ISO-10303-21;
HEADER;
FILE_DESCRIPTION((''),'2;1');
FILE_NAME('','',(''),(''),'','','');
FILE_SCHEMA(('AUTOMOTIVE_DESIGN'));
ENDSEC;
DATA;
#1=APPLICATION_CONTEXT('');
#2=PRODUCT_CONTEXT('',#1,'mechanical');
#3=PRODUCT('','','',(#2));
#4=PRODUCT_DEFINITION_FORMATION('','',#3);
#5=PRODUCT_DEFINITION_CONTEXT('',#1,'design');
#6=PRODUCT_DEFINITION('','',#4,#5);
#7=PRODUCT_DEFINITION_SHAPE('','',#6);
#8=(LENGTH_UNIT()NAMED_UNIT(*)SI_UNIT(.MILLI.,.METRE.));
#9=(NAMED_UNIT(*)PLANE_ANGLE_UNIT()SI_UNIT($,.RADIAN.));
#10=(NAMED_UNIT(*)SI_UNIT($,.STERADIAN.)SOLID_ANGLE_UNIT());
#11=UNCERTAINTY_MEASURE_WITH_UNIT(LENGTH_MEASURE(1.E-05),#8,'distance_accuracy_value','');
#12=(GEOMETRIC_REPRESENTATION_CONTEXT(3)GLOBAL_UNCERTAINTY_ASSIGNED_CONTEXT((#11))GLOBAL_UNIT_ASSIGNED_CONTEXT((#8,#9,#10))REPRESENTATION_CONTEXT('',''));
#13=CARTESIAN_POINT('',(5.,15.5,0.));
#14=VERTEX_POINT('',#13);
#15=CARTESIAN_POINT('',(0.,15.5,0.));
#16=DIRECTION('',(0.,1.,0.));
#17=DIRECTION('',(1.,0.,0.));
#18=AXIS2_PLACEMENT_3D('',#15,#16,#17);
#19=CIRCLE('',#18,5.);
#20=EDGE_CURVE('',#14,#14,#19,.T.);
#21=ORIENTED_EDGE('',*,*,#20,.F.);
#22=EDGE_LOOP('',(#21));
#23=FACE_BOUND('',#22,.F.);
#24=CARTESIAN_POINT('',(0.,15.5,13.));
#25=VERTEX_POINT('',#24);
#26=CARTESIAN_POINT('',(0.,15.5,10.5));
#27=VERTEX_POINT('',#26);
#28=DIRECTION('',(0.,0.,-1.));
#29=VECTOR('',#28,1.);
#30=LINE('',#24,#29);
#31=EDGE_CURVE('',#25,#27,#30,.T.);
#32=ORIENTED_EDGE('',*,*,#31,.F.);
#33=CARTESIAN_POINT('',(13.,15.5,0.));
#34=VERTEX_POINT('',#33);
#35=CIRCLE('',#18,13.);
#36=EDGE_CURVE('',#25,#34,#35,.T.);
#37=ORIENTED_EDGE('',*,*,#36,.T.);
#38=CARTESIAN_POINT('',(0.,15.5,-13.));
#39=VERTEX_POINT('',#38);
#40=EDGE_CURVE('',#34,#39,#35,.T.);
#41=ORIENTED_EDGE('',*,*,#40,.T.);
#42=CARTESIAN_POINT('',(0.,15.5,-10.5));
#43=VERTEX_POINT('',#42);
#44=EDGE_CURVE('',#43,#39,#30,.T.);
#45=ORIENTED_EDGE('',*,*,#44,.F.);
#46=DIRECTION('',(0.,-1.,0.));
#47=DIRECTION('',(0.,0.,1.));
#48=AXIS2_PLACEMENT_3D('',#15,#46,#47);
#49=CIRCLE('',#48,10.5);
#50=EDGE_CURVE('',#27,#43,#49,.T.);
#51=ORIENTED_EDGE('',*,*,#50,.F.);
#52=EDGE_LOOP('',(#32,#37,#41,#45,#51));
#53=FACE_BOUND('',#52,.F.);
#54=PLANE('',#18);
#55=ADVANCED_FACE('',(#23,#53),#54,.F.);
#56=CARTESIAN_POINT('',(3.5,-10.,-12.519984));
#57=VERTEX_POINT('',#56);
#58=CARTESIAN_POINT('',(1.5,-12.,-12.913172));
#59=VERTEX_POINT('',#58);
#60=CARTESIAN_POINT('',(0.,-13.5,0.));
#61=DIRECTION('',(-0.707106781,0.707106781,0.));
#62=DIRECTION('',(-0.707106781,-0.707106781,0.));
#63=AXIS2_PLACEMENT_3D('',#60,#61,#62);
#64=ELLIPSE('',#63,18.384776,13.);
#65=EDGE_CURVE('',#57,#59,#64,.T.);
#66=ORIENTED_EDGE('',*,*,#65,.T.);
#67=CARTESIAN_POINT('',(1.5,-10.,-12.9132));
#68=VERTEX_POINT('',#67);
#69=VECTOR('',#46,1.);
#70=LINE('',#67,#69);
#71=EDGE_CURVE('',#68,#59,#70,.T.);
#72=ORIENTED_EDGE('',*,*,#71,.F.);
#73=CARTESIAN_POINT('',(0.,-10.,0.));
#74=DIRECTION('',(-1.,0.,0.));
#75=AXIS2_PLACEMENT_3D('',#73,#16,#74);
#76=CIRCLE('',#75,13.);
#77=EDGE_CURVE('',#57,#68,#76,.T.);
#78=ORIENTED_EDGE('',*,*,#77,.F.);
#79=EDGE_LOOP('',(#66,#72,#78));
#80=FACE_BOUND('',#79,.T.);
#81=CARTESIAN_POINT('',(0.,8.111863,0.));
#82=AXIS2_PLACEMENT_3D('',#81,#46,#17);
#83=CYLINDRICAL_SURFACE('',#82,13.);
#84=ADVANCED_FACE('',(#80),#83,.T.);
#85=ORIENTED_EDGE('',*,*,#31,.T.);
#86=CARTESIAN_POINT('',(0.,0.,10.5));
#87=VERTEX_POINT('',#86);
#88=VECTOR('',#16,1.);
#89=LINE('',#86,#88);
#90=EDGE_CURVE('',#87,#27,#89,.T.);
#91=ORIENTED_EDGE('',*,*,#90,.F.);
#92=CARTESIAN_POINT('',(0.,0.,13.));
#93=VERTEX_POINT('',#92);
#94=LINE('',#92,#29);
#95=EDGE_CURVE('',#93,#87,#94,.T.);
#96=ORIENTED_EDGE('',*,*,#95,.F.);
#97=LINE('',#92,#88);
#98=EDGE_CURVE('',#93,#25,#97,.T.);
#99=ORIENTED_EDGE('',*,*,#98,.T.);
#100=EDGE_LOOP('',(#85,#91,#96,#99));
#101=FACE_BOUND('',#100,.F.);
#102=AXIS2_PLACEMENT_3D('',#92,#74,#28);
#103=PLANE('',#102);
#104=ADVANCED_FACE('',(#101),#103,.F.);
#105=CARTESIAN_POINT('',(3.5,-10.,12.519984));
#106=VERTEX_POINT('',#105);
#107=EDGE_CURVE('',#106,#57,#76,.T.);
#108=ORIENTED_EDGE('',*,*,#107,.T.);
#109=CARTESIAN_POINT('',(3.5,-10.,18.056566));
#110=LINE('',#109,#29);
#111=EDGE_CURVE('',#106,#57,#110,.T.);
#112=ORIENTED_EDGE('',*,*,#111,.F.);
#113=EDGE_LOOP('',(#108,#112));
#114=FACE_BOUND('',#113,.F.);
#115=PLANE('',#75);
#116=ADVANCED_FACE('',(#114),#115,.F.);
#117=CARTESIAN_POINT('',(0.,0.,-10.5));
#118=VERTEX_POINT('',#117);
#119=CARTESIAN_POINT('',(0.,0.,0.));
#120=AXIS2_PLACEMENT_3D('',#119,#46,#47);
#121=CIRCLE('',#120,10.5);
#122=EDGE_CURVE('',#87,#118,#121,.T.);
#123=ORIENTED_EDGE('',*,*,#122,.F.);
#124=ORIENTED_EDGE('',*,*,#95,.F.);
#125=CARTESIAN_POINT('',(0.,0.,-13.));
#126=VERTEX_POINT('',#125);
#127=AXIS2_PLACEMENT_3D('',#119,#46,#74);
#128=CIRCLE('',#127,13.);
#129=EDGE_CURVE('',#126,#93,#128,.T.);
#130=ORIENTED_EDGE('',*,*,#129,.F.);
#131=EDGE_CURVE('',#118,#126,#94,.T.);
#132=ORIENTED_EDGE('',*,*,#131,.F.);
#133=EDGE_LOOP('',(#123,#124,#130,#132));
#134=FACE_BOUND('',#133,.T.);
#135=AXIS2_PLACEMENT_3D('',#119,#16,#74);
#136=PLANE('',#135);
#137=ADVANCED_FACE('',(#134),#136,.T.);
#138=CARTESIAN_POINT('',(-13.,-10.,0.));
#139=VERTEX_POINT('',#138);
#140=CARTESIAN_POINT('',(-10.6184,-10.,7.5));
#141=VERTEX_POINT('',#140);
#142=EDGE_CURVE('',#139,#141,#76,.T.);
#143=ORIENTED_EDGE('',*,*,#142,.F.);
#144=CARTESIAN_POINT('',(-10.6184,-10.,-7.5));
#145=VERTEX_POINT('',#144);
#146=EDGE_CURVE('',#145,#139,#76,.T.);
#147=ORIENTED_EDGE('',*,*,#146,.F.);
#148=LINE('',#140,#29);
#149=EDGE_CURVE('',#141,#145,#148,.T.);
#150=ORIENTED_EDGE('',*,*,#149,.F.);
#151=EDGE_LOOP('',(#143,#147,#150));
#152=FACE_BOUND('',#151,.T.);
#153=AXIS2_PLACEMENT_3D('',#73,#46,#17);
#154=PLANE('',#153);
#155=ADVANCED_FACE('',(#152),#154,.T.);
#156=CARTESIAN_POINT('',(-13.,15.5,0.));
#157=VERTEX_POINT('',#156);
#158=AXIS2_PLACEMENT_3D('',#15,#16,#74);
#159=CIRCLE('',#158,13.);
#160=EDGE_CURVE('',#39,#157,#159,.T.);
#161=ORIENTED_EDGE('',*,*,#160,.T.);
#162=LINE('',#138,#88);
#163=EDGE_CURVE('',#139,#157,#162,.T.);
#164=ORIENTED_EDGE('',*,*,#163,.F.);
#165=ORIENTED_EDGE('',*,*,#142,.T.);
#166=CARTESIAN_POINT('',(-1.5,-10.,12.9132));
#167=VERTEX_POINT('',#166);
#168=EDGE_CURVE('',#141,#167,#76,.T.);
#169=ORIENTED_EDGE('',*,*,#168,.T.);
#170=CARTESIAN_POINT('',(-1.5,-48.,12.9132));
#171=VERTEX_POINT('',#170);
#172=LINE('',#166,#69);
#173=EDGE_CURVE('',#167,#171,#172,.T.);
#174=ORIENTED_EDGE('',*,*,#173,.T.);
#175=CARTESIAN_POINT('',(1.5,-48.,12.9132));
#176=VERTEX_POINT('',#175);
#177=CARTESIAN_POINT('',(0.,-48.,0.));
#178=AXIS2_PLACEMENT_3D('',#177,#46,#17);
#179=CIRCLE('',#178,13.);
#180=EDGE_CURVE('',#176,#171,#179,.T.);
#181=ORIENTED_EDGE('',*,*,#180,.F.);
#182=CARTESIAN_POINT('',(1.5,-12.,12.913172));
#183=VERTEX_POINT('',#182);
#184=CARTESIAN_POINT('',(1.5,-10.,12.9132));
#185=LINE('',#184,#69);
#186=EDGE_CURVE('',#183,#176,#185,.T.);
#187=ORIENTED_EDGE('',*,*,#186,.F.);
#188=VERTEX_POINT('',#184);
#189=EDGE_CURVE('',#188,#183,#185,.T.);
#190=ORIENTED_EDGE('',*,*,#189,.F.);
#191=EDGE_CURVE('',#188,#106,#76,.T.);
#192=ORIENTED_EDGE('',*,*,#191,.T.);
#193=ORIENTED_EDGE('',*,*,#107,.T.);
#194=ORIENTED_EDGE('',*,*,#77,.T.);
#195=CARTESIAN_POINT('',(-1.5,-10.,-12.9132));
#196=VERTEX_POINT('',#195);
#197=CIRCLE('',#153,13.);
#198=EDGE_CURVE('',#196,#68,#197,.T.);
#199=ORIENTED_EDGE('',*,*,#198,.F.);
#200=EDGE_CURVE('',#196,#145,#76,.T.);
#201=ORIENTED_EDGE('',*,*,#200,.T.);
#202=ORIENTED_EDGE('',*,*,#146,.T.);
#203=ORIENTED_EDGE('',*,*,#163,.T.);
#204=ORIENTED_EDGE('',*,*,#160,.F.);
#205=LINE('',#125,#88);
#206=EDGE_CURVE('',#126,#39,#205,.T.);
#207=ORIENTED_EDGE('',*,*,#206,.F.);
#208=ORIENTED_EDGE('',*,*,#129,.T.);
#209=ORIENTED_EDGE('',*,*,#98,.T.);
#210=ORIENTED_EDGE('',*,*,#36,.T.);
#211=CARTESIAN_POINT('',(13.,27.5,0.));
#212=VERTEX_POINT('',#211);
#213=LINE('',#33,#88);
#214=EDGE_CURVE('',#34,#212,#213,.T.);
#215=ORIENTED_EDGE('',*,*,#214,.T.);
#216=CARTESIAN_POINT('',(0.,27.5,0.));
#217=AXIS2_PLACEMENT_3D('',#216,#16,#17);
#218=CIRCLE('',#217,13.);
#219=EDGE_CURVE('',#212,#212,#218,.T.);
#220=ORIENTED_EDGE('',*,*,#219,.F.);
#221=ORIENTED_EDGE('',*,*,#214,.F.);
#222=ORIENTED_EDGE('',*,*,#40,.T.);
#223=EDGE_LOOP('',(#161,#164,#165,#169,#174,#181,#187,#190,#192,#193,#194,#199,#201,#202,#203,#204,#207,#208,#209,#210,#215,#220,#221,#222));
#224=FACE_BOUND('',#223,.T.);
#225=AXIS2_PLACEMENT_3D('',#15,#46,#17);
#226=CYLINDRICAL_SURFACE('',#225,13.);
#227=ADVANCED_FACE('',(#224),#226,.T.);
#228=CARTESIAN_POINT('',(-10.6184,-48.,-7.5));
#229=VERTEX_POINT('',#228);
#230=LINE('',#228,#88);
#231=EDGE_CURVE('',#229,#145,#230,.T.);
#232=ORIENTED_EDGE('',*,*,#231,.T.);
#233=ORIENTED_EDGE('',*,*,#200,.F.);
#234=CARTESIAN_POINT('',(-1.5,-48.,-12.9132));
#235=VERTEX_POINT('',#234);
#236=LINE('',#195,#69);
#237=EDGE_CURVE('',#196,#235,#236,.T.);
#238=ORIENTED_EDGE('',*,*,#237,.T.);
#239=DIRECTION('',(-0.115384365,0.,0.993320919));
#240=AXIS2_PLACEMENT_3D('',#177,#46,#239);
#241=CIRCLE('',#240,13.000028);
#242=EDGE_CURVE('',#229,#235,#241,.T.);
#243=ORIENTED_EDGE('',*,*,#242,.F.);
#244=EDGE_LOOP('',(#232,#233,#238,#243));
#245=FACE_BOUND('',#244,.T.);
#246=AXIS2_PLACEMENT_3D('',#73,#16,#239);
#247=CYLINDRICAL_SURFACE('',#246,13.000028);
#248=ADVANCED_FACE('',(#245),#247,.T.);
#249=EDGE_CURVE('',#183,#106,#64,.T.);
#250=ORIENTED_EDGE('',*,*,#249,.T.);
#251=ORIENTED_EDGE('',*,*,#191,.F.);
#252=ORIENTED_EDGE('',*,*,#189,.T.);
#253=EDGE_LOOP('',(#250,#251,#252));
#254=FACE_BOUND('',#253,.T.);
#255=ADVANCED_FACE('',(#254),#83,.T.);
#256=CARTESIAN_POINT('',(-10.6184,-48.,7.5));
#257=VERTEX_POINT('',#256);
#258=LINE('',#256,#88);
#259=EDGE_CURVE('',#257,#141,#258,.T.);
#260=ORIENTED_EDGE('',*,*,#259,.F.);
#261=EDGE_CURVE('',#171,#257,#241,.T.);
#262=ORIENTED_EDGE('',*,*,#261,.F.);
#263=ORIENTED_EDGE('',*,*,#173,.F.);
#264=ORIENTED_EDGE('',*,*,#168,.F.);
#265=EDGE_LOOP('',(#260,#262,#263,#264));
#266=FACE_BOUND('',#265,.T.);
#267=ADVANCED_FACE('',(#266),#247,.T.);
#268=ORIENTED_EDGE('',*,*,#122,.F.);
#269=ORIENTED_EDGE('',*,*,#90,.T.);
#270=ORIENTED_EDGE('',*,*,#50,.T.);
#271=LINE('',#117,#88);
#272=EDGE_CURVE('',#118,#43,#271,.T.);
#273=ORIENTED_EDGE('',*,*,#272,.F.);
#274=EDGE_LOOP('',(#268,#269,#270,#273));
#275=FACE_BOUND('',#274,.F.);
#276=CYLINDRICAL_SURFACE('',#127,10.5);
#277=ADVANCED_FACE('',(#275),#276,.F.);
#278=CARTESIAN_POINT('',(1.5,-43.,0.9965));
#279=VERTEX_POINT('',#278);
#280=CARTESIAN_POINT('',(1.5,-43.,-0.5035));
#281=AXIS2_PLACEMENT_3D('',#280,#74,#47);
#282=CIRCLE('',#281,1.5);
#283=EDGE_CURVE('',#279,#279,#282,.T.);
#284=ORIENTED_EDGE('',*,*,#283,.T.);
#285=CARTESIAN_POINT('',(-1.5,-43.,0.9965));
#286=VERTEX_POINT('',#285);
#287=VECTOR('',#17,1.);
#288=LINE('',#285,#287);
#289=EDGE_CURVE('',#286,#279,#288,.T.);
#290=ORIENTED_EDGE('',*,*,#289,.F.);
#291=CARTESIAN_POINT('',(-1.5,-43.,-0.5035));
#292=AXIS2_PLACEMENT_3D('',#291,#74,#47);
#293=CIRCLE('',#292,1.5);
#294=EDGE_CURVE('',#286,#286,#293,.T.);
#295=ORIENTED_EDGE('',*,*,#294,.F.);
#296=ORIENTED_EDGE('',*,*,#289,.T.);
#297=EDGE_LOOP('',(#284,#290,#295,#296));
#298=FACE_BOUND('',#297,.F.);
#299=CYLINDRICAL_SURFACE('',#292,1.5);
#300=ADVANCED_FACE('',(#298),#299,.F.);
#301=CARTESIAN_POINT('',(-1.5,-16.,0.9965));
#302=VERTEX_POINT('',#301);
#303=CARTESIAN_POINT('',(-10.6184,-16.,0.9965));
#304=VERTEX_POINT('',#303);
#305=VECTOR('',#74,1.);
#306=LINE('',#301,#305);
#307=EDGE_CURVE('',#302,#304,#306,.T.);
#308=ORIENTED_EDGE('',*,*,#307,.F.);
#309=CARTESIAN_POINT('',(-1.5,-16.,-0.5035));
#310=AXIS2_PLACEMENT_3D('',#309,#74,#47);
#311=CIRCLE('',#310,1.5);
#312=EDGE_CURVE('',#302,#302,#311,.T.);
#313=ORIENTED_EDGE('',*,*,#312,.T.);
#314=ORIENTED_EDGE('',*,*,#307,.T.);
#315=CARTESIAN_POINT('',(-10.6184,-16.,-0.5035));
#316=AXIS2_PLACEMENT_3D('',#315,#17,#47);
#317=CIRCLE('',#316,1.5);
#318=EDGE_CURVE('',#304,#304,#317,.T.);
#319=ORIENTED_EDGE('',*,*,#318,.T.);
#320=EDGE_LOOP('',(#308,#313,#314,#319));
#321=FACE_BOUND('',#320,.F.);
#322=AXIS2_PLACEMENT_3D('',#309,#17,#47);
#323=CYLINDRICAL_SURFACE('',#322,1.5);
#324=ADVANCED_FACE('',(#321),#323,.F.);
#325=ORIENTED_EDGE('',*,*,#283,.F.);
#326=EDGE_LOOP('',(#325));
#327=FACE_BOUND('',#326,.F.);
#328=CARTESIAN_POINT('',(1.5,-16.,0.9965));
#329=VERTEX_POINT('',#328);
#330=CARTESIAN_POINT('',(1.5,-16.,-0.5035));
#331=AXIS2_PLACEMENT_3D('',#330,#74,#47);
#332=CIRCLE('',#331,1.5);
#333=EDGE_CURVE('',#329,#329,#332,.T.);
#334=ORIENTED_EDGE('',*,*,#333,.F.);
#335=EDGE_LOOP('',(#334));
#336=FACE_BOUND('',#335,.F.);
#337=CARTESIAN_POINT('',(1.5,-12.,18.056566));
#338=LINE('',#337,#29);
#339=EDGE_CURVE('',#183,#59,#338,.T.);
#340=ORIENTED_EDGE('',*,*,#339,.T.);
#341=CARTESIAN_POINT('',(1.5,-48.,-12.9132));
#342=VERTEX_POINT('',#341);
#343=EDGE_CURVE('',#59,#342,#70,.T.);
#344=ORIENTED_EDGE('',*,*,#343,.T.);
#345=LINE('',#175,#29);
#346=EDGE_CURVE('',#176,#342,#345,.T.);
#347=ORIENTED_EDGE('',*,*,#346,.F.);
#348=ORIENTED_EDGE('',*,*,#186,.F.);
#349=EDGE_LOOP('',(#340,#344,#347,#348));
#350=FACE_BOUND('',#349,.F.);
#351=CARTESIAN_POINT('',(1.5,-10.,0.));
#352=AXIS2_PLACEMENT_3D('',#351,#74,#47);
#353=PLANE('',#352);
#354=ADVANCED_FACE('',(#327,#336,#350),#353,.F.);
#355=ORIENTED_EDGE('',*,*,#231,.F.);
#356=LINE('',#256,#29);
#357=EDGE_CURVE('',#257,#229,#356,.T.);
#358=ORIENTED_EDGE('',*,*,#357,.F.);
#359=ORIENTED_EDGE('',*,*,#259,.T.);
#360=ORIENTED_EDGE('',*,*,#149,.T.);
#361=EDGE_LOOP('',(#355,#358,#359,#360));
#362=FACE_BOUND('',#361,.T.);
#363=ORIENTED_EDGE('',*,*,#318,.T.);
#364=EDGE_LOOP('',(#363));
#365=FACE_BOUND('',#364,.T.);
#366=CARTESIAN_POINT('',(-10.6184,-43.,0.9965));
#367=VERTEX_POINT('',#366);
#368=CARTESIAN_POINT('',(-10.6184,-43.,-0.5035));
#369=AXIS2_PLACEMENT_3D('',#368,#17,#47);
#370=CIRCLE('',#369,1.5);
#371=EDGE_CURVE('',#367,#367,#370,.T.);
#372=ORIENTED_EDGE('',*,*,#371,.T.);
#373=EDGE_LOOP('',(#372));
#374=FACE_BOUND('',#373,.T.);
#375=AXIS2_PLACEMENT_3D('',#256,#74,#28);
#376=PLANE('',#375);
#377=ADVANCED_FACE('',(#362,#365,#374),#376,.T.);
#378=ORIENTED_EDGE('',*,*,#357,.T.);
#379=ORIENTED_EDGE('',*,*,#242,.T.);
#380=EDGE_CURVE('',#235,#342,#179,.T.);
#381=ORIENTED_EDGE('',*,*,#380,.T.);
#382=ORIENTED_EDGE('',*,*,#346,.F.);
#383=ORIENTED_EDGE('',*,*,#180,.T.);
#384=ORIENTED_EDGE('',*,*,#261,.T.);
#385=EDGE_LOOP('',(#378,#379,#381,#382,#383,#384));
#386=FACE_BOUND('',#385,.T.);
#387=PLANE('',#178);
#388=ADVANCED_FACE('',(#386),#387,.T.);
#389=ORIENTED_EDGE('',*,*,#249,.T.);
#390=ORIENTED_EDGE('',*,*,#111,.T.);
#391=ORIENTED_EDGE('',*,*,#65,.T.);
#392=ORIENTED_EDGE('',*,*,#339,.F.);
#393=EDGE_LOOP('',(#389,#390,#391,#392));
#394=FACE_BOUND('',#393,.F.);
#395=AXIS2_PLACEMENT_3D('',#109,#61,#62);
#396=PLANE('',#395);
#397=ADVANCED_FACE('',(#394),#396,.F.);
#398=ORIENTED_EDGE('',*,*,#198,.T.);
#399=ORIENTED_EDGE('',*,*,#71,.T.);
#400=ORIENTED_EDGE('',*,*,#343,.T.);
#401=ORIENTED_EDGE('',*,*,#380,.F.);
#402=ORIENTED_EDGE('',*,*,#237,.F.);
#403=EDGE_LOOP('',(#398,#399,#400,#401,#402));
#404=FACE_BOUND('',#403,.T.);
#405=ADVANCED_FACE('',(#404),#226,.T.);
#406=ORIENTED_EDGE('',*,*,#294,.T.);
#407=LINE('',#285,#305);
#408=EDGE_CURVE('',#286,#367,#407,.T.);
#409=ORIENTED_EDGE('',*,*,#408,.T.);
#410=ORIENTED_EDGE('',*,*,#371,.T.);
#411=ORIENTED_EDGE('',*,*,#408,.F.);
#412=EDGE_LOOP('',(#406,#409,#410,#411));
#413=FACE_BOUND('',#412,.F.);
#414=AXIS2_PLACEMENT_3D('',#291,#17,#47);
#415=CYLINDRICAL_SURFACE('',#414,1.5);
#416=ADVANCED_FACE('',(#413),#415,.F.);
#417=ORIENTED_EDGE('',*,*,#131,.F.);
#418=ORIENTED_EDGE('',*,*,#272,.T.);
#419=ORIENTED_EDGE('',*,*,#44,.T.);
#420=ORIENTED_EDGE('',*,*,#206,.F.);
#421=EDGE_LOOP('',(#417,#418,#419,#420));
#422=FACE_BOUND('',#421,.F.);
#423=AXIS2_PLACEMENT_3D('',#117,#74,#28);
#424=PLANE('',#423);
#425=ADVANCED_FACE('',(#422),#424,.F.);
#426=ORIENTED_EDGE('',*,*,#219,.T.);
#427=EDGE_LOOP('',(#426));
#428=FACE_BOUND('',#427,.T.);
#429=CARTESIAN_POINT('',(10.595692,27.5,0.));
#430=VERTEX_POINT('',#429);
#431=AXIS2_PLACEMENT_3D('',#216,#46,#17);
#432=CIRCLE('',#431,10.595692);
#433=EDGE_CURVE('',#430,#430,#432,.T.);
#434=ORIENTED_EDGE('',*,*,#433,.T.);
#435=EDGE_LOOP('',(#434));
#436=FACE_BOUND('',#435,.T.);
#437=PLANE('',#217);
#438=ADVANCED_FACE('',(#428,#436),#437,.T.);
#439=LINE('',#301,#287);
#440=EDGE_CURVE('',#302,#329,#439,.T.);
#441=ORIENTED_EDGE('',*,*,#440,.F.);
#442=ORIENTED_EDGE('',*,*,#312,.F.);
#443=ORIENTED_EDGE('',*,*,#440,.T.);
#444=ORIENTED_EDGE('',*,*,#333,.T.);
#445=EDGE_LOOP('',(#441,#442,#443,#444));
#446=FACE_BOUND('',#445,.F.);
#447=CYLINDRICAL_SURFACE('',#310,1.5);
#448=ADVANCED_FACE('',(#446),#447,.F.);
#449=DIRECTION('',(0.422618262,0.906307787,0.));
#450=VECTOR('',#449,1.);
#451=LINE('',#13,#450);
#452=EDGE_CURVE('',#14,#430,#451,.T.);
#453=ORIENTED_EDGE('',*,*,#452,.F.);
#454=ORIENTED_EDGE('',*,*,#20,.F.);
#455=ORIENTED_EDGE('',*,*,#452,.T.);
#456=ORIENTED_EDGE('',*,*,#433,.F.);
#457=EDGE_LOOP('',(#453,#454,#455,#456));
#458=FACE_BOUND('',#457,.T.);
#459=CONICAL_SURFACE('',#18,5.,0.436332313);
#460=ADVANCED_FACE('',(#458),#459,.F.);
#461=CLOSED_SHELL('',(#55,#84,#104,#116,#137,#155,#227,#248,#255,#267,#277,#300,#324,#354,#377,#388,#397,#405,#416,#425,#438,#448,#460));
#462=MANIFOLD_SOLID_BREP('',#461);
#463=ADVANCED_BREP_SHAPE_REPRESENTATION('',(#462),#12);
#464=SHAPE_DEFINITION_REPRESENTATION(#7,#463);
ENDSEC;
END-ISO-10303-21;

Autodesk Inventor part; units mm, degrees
ref_plane "YZ Plane" through (0, 0, 0) normal (1, 0, 0) x (0, 1, 0)
ref_plane "XZ Plane" through (0, 0, 0) normal (0, 1, 0) x (-1, 0, 0)
ref_plane "XY Plane" through (0, 0, 0) normal (0, 0, 1) x (1, 0, 0)
sketch "Sketch1" plane through (0, 0, 0) normal (0, 1, 0) x (-1, 0, 0)
  circle A0 centre (0, 0) radius 13
  circle A1 centre (0, 0) radius 10.5
  line L0 (0, 13) -> (0, -13)
  point P0 (0, -10.5)
  point P1 (0, 10.5)
  dimension "d0" = 26
  dimension "d1" = 21
extrude "Extrusion1" add sketch "Sketch1" against normal blind 10
extrude "Extrusion2" add sketch "Sketch1" along normal blind 15.5 contours A0 L0 A1 picked at (12.058, 0.9643)
sketch "Sketch2" plane through (0, 15.5, 0) normal (0, 1, 0) x (1, 0, 0)
  circle A0 centre (0, 0) radius 13 projected
  circle A1 centre (0, 0) radius 10.5 projected
  circle A2 centre (0, 0) radius 5
  dimension "d6" = 10
extrude "Extrusion3" add sketch "Sketch2" along normal blind 12 contours A0 | A1
extrude "Extrusion4" cut sketch "Sketch2" along normal blind 15 draft 25 contours A2
sketch "Sketch3" plane through (0, -10, 0) normal (0, -1, 0) x (1, 0, 0)
  line L0 (0, 0) -> (-1.5, 0)
  line L1 (-1.5, 0) -> (-1.5, -12.9132)
  circle A0 centre (0, 0) radius 13 projected
  line L2 (-1.5, 0) -> (-1.5, 12.9132)
  line L3 (0, 0) -> (0, -0.2769)
  line L4 (1.5, 0) -> (1.5, -12.9132)
  line L5 (1.5, 0) -> (1.5, 12.9132)
  point P0 (1.5, -12.9132)
  point P1 (1.5, 12.9132)
  dimension "d11" = 1.5
extrude "Extrusion5" add sketch "Sketch3" along normal blind 38 contours L2 A0 L5 L4 L1
sketch "Sketch6" plane through (0, -10, 0) normal (0, -1, 0) x (1, 0, 0)
  line L0 (-1.5, -12.9132) -> (-1.5, 12.9132) projected
  arc A0 (-1.5, 12.9132) -> (-1.5, -12.9132) centre (0, 0) ccw projected
  arc A1 (1.5, -12.9132) -> (1.5, 12.9132) centre (0, 0) ccw projected
  line L1 (1.5, -12.9132) -> (1.5, 12.9132) projected
extrude "Extrusion7" add sketch "Sketch6" along normal blind 38 contours A0 L0
sketch "Sketch4" plane through (-1.5, -10, -12.9132) normal (-1, 0, 0) x (0, 0, 1)
  circle A0 centre (12.4097, -33) radius 1.5
  line L0 (25.8263, -38) -> (0, -38) projected
  circle A1 centre (12.4097, -6) radius 1.5
  point P0 (12.9132, 10)
  dimension "d14" = 5
  dimension "d17" = 3
  dimension "d18" = 3
  dimension "d19" = 27
extrude "Extrusion6" cut sketch "Sketch4" along normal mid plane 30
chamfer "Chamfer1" distance 2 angle 45 1 edges at (1.5, -10, -6.4566)
sketch "Sketch7" plane through (0, -48, 0) normal (0, -1, 0) x (1, 0, 0)
  circle A0 centre (0, 0) radius 13 projected
  line L0 (-10.6184, 7.5) -> (-10.6184, -7.5)
  dimension "d25" = 15
extrude "Extrusion8" cut sketch "Sketch7" against normal blind 38 contours L0 A0 picked at (-11.1206, 1.5629)
properties part number "Tapered guide" material "PC/ABS Plastic"
